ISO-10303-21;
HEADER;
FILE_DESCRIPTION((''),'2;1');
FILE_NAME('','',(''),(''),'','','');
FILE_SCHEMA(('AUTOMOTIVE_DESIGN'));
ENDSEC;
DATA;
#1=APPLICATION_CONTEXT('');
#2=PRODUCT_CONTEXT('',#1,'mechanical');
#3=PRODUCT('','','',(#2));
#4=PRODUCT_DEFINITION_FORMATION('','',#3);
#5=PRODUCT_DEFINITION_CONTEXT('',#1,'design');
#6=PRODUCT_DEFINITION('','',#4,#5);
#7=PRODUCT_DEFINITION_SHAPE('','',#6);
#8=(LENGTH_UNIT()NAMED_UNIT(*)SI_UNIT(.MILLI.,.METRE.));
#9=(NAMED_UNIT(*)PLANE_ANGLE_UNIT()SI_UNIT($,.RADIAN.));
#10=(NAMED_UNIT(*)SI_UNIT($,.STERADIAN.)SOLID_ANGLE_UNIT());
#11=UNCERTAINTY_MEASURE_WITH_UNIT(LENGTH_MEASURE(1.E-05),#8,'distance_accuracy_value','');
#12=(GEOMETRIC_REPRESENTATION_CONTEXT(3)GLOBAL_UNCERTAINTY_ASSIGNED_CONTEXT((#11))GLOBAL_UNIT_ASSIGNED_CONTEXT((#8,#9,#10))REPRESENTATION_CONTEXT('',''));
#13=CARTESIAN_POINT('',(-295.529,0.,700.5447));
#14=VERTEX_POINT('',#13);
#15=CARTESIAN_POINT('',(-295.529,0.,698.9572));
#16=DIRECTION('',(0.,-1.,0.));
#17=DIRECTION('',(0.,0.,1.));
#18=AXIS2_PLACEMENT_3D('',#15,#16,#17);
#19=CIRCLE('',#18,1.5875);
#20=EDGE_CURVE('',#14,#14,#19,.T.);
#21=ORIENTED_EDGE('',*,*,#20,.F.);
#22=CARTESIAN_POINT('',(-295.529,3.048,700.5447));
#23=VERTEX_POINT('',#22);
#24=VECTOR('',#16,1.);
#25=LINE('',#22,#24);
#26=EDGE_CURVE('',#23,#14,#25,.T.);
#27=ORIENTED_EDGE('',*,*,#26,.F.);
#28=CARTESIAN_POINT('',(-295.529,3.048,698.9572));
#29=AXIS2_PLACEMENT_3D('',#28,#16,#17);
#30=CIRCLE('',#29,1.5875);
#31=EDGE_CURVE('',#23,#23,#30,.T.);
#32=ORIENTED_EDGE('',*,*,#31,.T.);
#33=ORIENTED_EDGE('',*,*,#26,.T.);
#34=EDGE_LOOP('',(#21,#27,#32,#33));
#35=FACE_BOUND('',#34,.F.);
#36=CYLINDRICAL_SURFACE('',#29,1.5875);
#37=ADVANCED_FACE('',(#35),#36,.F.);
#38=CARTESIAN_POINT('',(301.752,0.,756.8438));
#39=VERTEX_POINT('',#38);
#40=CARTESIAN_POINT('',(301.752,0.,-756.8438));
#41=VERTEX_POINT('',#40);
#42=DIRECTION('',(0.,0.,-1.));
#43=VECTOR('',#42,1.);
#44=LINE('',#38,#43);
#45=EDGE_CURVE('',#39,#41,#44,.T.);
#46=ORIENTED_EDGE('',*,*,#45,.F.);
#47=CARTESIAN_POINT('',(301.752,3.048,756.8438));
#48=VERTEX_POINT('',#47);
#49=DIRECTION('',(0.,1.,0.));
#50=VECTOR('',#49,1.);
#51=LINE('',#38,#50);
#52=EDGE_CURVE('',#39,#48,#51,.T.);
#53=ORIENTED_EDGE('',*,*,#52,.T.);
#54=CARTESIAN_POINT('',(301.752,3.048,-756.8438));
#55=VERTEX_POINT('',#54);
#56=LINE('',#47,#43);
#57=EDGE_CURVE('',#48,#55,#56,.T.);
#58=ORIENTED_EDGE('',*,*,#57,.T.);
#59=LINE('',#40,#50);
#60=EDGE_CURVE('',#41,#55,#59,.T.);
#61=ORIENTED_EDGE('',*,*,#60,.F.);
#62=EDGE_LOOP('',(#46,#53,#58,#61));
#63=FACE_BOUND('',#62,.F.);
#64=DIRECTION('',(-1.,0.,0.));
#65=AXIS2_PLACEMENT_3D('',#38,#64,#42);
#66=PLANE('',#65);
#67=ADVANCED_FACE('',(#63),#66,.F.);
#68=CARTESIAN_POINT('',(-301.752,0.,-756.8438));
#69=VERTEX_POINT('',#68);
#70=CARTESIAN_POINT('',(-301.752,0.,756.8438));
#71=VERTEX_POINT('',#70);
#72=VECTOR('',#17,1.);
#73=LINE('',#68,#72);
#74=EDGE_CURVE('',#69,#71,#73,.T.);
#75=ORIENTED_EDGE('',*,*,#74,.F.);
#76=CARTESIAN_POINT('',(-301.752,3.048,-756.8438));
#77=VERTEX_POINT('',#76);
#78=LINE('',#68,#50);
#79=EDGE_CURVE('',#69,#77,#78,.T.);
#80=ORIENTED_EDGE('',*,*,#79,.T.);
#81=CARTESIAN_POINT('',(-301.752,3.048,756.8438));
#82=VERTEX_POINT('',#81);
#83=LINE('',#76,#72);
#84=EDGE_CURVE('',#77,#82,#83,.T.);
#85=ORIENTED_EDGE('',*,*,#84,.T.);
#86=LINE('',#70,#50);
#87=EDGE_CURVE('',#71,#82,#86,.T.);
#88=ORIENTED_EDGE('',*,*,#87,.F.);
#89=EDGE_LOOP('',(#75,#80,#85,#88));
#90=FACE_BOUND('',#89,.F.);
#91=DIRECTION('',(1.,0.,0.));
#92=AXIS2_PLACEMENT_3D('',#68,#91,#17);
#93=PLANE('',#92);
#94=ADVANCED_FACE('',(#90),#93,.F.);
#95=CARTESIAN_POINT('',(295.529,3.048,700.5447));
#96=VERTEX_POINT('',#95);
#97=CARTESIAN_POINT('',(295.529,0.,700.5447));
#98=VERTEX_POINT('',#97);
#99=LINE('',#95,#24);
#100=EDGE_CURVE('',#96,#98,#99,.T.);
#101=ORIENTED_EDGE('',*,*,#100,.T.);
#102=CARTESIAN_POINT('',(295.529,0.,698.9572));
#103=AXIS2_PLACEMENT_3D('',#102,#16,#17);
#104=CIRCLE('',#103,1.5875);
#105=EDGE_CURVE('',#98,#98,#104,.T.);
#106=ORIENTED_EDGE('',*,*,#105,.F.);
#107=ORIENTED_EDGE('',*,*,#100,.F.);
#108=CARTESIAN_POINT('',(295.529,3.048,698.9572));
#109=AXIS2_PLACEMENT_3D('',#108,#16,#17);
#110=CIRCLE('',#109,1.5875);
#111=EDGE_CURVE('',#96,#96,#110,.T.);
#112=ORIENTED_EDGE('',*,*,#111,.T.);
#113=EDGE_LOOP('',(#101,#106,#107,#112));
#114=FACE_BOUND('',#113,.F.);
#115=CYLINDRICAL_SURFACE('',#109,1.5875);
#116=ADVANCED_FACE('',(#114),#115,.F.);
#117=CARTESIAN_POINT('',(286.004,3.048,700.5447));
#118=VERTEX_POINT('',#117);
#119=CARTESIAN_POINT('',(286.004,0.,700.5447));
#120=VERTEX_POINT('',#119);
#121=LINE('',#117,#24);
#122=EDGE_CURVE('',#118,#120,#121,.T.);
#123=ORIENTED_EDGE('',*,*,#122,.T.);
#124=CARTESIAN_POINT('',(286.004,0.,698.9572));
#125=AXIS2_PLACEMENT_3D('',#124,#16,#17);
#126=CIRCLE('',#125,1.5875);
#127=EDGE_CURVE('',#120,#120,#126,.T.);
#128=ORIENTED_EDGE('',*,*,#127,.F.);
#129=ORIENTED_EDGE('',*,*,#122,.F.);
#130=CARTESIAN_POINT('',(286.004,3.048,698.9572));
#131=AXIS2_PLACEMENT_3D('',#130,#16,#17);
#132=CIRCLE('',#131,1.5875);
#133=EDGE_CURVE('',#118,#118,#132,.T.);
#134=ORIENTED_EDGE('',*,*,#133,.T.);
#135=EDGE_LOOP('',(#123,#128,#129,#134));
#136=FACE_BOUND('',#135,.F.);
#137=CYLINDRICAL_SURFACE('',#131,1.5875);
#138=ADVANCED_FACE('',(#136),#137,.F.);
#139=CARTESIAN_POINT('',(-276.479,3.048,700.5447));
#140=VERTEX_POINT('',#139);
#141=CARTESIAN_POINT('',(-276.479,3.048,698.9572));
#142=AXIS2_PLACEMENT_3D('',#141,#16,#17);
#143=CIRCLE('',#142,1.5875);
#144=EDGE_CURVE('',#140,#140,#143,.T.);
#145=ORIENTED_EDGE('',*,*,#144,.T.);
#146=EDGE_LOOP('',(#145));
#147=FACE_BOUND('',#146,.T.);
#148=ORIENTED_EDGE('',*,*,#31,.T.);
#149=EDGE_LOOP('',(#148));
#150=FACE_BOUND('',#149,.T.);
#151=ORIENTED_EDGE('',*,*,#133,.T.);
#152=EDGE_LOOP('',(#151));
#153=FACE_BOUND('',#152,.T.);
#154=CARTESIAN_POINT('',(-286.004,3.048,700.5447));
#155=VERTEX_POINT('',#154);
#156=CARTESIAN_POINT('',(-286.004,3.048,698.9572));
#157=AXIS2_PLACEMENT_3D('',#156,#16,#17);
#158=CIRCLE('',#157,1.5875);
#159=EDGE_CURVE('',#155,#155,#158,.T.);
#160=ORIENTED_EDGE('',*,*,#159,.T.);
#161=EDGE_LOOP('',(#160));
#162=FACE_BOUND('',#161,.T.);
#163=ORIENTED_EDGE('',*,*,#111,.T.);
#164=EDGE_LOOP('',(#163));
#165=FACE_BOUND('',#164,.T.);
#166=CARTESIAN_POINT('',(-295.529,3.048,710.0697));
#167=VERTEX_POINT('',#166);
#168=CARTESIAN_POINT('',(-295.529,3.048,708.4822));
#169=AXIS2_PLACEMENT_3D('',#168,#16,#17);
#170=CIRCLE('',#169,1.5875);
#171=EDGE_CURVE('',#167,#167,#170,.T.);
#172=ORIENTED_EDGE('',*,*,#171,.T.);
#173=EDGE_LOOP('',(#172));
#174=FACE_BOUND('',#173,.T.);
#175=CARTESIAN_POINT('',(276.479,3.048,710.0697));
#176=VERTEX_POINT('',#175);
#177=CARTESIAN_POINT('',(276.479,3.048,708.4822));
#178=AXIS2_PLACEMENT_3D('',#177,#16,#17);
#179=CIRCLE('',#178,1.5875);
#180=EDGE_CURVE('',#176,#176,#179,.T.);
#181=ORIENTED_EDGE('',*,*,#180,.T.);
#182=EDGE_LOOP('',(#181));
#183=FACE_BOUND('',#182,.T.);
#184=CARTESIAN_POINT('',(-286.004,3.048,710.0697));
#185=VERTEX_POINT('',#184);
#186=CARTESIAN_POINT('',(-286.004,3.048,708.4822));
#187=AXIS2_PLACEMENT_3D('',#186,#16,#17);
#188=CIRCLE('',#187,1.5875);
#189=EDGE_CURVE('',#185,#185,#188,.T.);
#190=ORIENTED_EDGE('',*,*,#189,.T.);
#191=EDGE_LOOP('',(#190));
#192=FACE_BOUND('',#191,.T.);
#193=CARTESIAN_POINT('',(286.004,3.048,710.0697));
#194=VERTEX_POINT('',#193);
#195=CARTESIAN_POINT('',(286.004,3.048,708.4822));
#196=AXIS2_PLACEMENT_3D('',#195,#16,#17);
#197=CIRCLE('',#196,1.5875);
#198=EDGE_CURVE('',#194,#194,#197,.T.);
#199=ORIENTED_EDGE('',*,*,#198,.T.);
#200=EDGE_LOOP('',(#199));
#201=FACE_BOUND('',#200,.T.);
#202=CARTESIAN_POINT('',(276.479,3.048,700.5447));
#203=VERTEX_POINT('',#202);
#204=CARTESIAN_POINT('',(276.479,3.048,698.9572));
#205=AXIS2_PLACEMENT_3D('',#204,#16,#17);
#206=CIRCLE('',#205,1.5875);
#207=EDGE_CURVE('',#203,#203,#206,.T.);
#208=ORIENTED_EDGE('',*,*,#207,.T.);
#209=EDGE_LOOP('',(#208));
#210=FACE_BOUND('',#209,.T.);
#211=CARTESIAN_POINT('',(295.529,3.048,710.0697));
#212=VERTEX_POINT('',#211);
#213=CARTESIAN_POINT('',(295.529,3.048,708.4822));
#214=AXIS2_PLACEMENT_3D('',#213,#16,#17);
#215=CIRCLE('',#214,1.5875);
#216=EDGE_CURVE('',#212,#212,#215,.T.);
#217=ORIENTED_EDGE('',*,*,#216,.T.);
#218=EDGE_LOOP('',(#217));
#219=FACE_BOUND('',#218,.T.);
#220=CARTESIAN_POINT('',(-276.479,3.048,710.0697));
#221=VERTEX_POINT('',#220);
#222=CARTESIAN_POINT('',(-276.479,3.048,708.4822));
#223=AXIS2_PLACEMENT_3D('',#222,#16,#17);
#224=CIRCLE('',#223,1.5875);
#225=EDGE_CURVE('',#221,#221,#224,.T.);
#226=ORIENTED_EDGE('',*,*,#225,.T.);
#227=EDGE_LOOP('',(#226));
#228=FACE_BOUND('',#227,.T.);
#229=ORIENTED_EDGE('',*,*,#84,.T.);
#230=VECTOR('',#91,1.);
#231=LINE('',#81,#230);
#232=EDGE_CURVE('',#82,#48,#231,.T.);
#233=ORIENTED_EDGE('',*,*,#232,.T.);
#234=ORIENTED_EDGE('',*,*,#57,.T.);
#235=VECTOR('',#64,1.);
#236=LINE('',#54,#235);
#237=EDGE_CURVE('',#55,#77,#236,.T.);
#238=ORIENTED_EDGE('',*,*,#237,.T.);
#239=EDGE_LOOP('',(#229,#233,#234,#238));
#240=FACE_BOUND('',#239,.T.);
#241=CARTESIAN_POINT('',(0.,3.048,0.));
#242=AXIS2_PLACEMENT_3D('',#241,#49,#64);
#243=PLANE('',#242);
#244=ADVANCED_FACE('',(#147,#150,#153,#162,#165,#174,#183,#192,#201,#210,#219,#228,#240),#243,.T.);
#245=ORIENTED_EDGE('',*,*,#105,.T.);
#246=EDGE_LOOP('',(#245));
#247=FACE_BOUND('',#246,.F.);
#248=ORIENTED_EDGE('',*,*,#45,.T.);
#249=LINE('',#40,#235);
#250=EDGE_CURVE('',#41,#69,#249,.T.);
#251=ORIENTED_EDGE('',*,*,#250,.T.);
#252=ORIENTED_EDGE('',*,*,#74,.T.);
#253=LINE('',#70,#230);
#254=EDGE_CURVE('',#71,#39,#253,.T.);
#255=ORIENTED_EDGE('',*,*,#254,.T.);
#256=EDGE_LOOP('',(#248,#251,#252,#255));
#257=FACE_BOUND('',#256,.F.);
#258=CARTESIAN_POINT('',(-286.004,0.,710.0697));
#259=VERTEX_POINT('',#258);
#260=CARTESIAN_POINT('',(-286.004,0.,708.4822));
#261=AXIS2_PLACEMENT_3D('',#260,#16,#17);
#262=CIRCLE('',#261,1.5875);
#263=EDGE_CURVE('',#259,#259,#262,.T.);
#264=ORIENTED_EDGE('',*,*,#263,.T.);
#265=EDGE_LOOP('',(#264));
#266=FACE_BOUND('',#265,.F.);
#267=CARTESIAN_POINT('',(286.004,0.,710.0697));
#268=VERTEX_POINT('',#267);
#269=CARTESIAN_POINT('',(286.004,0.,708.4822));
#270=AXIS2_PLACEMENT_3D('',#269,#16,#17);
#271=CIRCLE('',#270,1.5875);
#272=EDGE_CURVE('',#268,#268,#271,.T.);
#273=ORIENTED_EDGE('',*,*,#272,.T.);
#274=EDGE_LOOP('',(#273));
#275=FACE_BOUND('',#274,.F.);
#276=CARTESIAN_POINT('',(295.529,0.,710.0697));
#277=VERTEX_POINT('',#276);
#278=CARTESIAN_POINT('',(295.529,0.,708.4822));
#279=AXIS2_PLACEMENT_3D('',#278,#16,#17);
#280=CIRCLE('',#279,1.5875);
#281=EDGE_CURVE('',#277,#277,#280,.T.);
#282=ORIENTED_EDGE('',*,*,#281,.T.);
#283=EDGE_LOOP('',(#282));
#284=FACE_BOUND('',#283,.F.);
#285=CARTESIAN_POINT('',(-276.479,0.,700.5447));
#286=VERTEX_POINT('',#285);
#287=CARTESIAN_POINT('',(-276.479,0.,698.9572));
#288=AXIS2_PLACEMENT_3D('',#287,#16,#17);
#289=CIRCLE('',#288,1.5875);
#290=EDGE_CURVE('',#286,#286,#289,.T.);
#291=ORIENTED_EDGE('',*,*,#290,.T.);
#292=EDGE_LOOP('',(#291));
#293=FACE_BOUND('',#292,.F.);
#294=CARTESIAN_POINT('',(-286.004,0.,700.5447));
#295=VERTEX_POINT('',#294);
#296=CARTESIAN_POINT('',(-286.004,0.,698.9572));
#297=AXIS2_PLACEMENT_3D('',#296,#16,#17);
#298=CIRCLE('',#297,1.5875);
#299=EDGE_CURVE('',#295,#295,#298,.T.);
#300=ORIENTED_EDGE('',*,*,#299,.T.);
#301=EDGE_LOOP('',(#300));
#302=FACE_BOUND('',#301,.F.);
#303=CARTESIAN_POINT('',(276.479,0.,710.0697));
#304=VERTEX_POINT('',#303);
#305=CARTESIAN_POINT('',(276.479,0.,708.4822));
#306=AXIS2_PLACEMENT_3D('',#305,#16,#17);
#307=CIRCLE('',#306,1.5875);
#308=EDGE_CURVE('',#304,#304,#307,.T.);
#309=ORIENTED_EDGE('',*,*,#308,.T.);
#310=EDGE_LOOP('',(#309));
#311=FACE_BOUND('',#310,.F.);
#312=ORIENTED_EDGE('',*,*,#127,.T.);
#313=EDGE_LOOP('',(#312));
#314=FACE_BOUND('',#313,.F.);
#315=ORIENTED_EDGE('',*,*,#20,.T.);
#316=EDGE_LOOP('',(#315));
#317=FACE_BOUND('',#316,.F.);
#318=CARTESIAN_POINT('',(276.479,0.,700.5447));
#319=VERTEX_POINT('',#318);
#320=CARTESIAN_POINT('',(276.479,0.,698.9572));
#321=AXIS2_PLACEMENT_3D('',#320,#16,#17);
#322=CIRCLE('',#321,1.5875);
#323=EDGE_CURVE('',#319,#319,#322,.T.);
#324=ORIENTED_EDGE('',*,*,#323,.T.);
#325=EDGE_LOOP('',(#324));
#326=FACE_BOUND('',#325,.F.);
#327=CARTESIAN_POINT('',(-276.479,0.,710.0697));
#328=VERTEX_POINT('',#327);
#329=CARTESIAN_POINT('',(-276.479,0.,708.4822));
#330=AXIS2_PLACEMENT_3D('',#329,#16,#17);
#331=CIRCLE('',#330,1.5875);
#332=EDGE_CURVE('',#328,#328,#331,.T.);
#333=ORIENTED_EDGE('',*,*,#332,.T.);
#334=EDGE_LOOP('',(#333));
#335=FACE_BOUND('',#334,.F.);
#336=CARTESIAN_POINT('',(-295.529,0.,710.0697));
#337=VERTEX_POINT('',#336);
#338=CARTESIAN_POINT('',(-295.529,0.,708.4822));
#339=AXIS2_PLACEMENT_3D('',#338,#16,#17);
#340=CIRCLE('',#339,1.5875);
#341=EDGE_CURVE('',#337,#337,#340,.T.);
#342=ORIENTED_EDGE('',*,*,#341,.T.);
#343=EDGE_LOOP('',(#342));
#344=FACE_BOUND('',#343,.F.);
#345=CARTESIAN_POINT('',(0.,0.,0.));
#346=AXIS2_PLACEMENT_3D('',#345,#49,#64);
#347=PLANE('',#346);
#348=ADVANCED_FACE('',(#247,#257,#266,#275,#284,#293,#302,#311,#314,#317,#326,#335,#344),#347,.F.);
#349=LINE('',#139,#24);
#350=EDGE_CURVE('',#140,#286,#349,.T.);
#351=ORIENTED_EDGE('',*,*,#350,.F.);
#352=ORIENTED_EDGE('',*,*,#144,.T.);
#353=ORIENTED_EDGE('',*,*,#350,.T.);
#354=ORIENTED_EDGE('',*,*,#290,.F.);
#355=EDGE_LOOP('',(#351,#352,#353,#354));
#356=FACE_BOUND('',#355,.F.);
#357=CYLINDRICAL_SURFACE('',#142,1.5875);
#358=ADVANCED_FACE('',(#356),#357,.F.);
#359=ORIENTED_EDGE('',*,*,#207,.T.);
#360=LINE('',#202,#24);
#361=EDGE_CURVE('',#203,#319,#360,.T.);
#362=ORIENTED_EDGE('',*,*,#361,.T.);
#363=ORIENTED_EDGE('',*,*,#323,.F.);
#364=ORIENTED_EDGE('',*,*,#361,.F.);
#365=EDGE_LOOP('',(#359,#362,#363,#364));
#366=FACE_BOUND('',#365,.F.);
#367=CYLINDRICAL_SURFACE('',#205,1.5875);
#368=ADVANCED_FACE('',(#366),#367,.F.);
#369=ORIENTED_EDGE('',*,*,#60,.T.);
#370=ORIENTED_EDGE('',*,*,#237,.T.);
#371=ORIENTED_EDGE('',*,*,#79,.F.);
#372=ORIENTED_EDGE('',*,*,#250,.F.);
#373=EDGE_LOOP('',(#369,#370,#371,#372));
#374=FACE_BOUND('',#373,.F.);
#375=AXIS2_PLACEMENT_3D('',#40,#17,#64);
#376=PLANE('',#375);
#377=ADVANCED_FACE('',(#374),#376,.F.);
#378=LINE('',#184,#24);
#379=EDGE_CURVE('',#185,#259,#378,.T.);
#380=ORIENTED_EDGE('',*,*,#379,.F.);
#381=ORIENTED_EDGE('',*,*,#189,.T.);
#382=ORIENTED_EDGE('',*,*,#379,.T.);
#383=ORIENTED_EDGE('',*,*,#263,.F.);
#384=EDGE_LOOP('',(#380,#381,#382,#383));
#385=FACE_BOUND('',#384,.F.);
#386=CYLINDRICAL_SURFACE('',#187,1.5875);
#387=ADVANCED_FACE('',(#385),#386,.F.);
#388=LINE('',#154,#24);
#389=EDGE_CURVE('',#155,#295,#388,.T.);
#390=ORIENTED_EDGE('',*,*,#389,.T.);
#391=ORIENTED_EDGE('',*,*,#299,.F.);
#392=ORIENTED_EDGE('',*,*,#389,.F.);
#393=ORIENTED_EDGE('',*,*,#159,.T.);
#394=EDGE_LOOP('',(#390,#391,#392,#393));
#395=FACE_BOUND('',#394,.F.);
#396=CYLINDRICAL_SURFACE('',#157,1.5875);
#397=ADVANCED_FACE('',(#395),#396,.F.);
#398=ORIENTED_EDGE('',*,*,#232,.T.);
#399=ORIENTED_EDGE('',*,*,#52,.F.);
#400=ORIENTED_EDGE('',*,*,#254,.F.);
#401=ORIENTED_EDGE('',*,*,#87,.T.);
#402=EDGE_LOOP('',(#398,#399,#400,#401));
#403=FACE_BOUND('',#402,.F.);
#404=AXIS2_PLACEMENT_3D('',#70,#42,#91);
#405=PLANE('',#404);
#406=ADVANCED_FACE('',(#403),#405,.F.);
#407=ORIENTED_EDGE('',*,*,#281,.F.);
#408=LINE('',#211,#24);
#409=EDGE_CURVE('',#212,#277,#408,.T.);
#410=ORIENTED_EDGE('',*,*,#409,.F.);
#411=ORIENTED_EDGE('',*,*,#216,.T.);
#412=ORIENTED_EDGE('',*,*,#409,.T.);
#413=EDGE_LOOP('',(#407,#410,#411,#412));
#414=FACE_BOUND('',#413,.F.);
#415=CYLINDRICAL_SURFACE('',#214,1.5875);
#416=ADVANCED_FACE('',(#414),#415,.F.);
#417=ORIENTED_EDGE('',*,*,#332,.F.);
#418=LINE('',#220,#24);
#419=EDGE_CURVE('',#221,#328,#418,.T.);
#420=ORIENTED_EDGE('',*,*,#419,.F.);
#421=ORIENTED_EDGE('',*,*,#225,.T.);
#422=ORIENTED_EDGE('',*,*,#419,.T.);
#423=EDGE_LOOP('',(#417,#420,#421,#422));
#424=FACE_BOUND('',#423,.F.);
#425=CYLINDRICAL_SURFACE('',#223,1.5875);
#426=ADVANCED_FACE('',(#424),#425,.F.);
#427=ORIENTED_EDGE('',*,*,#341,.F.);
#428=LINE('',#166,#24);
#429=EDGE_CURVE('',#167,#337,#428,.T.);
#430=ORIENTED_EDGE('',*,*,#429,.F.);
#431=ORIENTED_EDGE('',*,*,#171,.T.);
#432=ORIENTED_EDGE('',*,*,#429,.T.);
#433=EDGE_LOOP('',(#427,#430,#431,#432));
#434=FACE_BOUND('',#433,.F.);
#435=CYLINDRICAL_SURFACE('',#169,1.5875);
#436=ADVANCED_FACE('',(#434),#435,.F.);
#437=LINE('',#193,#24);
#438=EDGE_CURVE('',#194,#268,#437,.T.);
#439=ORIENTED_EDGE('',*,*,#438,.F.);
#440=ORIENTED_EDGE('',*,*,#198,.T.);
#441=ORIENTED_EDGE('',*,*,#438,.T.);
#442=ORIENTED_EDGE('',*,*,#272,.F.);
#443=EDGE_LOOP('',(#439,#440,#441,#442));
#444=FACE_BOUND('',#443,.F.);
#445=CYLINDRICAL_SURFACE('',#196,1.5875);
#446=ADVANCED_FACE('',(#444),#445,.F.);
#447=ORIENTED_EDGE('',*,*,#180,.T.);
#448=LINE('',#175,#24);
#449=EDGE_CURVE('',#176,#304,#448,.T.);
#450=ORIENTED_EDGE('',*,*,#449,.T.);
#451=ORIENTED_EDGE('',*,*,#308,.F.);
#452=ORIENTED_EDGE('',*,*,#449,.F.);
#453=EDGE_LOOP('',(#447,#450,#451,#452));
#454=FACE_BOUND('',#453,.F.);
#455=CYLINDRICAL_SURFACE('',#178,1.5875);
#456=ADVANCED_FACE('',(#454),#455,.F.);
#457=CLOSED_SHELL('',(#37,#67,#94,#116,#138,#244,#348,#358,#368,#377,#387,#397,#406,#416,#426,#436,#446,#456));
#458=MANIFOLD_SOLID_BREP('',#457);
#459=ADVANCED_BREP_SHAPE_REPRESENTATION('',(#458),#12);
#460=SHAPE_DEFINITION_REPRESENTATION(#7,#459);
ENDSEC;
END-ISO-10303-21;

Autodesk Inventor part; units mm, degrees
ref_plane "YZ Plane" through (0, 0, 0) normal (1, 0, 0) x (0, 1, 0)
ref_plane "XZ Plane" through (0, 0, 0) normal (0, 1, 0) x (-1, 0, 0)
ref_plane "XY Plane" through (0, 0, 0) normal (0, 0, 1) x (1, 0, 0)
sketch "Sketch2" plane through (0, 0, 0) normal (0, 1, 0) x (-1, 0, 0)
  line L0 (-301.752, -756.8438) -> (301.752, -756.8438)
  line L1 (301.752, -756.8438) -> (301.752, 756.8438)
  line L2 (301.752, 756.8438) -> (-301.752, 756.8438)
  line L3 (-301.752, 756.8438) -> (-301.752, -756.8438)
  point P0 (0, 0)
  dimension "d0" = 301.752
  dimension "d1" = 301.752
  dimension "d2" = 756.8438
  dimension "d3" = 756.8438
extrude "Plate1" add sketch "Sketch2" along normal blind 3.048
sketch "Sketch3" plane through (0, 3.048, 0) normal (0, 1, 0) x (1, 0, 0)
  line L0 (301.752, 756.8438) -> (301.752, -756.8438) projected
  line L1 (-301.752, -756.8438) -> (-301.752, 756.8438) projected
  line L2 (301.752, -756.8438) -> (-301.752, -756.8438) projected
  point P0 (0, 0)
  point P1 (-295.529, -698.9572)
  point P2 (276.479, -698.9572)
  dimension "d5" = 6.223
  dimension "d6" = 25.273
  dimension "d22" = 57.8866
  dimension "d23" = 57.8866
hole "Hole1" at (-295.529, 3.048, 698.9572) at (276.479, 3.048, 698.9572) direction (0, -1, 0) diameter 3.175 end through all
sketch "Sketch4" plane through (0, 3.048, 0) normal (0, 1, 0) x (1, 0, 0)
  circle A0 centre (-295.529, -698.9572) radius 1.5875 projected
  line L0 (301.752, -756.8438) -> (-301.752, -756.8438) projected
  line L1 (-295.529, -698.9572) -> (-270.8654, -698.9572)
  point P0 (0, 0)
sketch "Sketch5" plane through (0, 3.048, 0) normal (0, 1, 0) x (1, 0, 0)
  circle A0 centre (-295.529, -698.9572) radius 1.5875 projected
  line L0 (301.752, -756.8438) -> (-301.752, -756.8438) projected
  line L1 (-295.529, -698.9572) -> (-295.529, -717.14)
  line L2 (301.752, 756.8438) -> (301.752, -756.8438) projected
  point P0 (0, 0)
pattern_linear "Rectangular Pattern1" count 3 spacing 9.525 along (1, 0, 0) count 2 spacing 9.525 along (0, 0, 1) of "Hole1"
equation "\"d23\" = d22"
equation "\"d14\" = Thickness"
equation "\"d1\" = d0"
equation "\"d3\" = d2"
equation "\"BendRadius\" = Thickness"
equation "\"BendReliefWidth\" = Thickness"
equation "\"BendReliefDepth\" = 0.5 * Thickness"
equation "\"CornerReliefSize\" = 4 * Thickness"
equation "\"MinimumRemnant\" = 2 * Thickness"
equation "\"TransitionRadius\" = BendRadius"
equation "\"JacobiRadiusSize\" = BendRadius"
equation "\"GapSize\" = Thickness"
equation "\"d4\" = BendRadius"
equation "\"Thickness\" = 3.048"
properties part number "Base Top"
